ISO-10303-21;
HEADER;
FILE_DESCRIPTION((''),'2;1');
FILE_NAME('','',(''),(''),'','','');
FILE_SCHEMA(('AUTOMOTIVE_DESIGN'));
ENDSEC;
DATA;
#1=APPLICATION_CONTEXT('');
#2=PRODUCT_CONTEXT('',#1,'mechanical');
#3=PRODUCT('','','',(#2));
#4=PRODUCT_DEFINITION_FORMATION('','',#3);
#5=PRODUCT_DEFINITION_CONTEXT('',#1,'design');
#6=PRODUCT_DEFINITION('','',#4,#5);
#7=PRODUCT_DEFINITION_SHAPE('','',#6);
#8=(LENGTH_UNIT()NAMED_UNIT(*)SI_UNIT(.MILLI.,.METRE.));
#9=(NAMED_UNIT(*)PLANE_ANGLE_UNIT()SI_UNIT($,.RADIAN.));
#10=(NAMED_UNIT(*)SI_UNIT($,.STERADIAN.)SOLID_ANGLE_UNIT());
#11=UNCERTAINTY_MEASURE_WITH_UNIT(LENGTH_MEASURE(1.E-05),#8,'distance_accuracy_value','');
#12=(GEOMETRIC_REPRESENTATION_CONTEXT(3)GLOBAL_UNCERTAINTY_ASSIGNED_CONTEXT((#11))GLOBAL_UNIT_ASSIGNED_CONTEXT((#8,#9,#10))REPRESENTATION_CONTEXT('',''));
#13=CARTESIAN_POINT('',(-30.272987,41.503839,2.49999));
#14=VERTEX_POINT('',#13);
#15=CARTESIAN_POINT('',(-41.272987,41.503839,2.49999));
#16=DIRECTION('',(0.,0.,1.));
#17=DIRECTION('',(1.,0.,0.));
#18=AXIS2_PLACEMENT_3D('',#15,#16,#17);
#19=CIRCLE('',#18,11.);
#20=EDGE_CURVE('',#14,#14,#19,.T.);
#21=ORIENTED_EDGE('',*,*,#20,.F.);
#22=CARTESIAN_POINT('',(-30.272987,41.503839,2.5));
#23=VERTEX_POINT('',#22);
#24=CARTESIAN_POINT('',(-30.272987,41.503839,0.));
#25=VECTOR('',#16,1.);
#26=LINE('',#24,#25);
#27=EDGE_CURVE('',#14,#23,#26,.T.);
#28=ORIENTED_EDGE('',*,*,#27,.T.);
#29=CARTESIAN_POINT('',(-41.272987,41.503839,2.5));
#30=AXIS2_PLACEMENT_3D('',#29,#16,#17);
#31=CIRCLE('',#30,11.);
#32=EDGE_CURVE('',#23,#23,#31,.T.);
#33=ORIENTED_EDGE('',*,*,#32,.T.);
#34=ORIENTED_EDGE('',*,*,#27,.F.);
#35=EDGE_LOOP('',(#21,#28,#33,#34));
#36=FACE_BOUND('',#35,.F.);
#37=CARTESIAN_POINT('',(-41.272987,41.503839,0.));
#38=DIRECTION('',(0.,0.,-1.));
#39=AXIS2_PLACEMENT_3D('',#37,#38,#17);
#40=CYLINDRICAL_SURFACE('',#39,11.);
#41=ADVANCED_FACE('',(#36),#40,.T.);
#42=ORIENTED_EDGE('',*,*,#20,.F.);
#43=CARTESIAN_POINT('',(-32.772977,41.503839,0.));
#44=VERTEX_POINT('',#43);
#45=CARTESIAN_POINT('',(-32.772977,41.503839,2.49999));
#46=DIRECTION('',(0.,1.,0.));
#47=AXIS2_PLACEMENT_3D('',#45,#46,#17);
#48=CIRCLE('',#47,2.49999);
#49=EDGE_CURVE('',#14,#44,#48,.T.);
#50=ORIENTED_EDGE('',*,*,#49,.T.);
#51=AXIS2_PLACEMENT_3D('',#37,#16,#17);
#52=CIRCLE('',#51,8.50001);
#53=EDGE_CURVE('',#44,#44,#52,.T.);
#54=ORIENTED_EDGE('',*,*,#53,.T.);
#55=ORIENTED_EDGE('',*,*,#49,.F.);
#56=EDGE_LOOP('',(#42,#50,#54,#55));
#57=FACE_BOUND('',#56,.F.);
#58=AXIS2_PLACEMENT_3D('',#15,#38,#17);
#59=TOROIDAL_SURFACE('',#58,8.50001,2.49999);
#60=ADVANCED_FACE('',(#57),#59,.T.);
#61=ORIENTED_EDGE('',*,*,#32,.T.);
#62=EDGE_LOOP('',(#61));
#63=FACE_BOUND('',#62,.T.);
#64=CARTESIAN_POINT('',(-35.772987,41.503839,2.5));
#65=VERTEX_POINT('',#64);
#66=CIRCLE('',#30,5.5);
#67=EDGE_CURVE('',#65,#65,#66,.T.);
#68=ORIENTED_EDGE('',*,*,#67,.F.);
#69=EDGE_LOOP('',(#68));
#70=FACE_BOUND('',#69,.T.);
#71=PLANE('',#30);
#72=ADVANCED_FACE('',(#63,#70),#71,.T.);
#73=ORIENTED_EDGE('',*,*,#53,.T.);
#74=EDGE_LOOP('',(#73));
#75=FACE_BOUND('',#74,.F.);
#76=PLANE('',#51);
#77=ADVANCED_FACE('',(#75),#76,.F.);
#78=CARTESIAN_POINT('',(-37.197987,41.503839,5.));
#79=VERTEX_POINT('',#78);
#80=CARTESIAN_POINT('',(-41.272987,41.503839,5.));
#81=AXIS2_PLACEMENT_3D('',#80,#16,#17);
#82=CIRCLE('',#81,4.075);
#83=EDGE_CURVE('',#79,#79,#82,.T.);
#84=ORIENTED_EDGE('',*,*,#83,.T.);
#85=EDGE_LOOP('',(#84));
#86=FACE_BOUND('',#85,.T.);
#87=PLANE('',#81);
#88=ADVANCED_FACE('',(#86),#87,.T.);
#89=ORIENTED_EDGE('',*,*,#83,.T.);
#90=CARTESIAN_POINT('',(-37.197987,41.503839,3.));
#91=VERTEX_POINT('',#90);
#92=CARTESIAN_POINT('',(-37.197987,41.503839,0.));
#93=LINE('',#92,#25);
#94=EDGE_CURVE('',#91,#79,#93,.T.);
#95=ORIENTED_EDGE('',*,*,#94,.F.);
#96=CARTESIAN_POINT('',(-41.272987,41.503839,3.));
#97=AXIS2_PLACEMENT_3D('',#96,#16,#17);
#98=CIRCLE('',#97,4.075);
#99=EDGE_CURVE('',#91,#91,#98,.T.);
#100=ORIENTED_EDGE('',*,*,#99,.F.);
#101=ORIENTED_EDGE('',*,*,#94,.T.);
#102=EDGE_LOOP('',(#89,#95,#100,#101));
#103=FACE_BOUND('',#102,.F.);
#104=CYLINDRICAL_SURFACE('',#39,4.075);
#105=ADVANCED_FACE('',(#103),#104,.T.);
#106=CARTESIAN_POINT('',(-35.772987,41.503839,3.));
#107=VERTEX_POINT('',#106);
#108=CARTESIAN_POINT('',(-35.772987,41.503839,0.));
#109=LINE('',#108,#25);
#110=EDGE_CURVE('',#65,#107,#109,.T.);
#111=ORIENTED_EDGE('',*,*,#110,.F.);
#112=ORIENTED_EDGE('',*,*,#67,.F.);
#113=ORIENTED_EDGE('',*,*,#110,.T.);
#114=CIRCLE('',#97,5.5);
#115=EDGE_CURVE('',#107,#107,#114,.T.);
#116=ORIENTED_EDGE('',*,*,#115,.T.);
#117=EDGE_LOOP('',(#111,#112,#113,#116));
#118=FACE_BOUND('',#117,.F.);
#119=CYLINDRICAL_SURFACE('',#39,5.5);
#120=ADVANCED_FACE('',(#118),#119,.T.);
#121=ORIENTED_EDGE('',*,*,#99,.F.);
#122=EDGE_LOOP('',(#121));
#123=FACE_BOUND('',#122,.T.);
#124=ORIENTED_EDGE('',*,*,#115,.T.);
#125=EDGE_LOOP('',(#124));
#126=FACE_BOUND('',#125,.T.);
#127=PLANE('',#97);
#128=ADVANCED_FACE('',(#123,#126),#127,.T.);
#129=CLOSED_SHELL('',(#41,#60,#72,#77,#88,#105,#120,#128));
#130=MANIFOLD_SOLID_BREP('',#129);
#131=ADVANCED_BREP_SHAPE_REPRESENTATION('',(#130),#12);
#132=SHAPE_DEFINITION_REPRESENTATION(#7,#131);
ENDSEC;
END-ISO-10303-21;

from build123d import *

# Parameters (mm, degrees)
F0_R     = 11
F0_R_2   = 5.5
F1_DEPTH = 2.5
F0_R_3   = 4.075
F2_DEPTH = 3
F3_DEPTH = 5
F4_R     = 2.49999


# Not quite as in the source:
# - a fillet or chamfer is up to 0.001 mm smaller than in the source, because OpenCascade refuses the exact size


with BuildPart() as f1:
    # F0 (on Top) → F1 (new body)
    with BuildSketch(Plane.XY):
        with Locations((-41.2729866803, 41.5038391948)):
            Circle(F0_R)
        with Locations((-41.2729866803, 41.5038391948)):
            Circle(F0_R_2, mode=Mode.SUBTRACT)
    extrude(amount=F1_DEPTH)

    # F0 (on Top) → F2 (join)
    with BuildSketch(Plane.XY):
        with Locations((-41.2729866803, 41.5038391948)):
            Circle(F0_R_2)
        with Locations((-41.2729866803, 41.5038391948)):
            Circle(F0_R_3, mode=Mode.SUBTRACT)
    extrude(amount=F2_DEPTH)

    # F0 (on Top) → F3 (join)
    with BuildSketch(Plane.XY):
        with Locations((-41.2729866803, 41.5038391948)):
            Circle(F0_R_3)
    extrude(amount=F3_DEPTH)

    # F4 (radius 2.5 in the source; OpenCascade refuses exactly that, so slightly less here)
    f4_edges = [f1.edges().sort_by_distance(p)[0] for p in [
        (-52.272987, 41.503839, 0),
    ]]
    fillet(f4_edges, radius=F4_R)


solid = f1.part
